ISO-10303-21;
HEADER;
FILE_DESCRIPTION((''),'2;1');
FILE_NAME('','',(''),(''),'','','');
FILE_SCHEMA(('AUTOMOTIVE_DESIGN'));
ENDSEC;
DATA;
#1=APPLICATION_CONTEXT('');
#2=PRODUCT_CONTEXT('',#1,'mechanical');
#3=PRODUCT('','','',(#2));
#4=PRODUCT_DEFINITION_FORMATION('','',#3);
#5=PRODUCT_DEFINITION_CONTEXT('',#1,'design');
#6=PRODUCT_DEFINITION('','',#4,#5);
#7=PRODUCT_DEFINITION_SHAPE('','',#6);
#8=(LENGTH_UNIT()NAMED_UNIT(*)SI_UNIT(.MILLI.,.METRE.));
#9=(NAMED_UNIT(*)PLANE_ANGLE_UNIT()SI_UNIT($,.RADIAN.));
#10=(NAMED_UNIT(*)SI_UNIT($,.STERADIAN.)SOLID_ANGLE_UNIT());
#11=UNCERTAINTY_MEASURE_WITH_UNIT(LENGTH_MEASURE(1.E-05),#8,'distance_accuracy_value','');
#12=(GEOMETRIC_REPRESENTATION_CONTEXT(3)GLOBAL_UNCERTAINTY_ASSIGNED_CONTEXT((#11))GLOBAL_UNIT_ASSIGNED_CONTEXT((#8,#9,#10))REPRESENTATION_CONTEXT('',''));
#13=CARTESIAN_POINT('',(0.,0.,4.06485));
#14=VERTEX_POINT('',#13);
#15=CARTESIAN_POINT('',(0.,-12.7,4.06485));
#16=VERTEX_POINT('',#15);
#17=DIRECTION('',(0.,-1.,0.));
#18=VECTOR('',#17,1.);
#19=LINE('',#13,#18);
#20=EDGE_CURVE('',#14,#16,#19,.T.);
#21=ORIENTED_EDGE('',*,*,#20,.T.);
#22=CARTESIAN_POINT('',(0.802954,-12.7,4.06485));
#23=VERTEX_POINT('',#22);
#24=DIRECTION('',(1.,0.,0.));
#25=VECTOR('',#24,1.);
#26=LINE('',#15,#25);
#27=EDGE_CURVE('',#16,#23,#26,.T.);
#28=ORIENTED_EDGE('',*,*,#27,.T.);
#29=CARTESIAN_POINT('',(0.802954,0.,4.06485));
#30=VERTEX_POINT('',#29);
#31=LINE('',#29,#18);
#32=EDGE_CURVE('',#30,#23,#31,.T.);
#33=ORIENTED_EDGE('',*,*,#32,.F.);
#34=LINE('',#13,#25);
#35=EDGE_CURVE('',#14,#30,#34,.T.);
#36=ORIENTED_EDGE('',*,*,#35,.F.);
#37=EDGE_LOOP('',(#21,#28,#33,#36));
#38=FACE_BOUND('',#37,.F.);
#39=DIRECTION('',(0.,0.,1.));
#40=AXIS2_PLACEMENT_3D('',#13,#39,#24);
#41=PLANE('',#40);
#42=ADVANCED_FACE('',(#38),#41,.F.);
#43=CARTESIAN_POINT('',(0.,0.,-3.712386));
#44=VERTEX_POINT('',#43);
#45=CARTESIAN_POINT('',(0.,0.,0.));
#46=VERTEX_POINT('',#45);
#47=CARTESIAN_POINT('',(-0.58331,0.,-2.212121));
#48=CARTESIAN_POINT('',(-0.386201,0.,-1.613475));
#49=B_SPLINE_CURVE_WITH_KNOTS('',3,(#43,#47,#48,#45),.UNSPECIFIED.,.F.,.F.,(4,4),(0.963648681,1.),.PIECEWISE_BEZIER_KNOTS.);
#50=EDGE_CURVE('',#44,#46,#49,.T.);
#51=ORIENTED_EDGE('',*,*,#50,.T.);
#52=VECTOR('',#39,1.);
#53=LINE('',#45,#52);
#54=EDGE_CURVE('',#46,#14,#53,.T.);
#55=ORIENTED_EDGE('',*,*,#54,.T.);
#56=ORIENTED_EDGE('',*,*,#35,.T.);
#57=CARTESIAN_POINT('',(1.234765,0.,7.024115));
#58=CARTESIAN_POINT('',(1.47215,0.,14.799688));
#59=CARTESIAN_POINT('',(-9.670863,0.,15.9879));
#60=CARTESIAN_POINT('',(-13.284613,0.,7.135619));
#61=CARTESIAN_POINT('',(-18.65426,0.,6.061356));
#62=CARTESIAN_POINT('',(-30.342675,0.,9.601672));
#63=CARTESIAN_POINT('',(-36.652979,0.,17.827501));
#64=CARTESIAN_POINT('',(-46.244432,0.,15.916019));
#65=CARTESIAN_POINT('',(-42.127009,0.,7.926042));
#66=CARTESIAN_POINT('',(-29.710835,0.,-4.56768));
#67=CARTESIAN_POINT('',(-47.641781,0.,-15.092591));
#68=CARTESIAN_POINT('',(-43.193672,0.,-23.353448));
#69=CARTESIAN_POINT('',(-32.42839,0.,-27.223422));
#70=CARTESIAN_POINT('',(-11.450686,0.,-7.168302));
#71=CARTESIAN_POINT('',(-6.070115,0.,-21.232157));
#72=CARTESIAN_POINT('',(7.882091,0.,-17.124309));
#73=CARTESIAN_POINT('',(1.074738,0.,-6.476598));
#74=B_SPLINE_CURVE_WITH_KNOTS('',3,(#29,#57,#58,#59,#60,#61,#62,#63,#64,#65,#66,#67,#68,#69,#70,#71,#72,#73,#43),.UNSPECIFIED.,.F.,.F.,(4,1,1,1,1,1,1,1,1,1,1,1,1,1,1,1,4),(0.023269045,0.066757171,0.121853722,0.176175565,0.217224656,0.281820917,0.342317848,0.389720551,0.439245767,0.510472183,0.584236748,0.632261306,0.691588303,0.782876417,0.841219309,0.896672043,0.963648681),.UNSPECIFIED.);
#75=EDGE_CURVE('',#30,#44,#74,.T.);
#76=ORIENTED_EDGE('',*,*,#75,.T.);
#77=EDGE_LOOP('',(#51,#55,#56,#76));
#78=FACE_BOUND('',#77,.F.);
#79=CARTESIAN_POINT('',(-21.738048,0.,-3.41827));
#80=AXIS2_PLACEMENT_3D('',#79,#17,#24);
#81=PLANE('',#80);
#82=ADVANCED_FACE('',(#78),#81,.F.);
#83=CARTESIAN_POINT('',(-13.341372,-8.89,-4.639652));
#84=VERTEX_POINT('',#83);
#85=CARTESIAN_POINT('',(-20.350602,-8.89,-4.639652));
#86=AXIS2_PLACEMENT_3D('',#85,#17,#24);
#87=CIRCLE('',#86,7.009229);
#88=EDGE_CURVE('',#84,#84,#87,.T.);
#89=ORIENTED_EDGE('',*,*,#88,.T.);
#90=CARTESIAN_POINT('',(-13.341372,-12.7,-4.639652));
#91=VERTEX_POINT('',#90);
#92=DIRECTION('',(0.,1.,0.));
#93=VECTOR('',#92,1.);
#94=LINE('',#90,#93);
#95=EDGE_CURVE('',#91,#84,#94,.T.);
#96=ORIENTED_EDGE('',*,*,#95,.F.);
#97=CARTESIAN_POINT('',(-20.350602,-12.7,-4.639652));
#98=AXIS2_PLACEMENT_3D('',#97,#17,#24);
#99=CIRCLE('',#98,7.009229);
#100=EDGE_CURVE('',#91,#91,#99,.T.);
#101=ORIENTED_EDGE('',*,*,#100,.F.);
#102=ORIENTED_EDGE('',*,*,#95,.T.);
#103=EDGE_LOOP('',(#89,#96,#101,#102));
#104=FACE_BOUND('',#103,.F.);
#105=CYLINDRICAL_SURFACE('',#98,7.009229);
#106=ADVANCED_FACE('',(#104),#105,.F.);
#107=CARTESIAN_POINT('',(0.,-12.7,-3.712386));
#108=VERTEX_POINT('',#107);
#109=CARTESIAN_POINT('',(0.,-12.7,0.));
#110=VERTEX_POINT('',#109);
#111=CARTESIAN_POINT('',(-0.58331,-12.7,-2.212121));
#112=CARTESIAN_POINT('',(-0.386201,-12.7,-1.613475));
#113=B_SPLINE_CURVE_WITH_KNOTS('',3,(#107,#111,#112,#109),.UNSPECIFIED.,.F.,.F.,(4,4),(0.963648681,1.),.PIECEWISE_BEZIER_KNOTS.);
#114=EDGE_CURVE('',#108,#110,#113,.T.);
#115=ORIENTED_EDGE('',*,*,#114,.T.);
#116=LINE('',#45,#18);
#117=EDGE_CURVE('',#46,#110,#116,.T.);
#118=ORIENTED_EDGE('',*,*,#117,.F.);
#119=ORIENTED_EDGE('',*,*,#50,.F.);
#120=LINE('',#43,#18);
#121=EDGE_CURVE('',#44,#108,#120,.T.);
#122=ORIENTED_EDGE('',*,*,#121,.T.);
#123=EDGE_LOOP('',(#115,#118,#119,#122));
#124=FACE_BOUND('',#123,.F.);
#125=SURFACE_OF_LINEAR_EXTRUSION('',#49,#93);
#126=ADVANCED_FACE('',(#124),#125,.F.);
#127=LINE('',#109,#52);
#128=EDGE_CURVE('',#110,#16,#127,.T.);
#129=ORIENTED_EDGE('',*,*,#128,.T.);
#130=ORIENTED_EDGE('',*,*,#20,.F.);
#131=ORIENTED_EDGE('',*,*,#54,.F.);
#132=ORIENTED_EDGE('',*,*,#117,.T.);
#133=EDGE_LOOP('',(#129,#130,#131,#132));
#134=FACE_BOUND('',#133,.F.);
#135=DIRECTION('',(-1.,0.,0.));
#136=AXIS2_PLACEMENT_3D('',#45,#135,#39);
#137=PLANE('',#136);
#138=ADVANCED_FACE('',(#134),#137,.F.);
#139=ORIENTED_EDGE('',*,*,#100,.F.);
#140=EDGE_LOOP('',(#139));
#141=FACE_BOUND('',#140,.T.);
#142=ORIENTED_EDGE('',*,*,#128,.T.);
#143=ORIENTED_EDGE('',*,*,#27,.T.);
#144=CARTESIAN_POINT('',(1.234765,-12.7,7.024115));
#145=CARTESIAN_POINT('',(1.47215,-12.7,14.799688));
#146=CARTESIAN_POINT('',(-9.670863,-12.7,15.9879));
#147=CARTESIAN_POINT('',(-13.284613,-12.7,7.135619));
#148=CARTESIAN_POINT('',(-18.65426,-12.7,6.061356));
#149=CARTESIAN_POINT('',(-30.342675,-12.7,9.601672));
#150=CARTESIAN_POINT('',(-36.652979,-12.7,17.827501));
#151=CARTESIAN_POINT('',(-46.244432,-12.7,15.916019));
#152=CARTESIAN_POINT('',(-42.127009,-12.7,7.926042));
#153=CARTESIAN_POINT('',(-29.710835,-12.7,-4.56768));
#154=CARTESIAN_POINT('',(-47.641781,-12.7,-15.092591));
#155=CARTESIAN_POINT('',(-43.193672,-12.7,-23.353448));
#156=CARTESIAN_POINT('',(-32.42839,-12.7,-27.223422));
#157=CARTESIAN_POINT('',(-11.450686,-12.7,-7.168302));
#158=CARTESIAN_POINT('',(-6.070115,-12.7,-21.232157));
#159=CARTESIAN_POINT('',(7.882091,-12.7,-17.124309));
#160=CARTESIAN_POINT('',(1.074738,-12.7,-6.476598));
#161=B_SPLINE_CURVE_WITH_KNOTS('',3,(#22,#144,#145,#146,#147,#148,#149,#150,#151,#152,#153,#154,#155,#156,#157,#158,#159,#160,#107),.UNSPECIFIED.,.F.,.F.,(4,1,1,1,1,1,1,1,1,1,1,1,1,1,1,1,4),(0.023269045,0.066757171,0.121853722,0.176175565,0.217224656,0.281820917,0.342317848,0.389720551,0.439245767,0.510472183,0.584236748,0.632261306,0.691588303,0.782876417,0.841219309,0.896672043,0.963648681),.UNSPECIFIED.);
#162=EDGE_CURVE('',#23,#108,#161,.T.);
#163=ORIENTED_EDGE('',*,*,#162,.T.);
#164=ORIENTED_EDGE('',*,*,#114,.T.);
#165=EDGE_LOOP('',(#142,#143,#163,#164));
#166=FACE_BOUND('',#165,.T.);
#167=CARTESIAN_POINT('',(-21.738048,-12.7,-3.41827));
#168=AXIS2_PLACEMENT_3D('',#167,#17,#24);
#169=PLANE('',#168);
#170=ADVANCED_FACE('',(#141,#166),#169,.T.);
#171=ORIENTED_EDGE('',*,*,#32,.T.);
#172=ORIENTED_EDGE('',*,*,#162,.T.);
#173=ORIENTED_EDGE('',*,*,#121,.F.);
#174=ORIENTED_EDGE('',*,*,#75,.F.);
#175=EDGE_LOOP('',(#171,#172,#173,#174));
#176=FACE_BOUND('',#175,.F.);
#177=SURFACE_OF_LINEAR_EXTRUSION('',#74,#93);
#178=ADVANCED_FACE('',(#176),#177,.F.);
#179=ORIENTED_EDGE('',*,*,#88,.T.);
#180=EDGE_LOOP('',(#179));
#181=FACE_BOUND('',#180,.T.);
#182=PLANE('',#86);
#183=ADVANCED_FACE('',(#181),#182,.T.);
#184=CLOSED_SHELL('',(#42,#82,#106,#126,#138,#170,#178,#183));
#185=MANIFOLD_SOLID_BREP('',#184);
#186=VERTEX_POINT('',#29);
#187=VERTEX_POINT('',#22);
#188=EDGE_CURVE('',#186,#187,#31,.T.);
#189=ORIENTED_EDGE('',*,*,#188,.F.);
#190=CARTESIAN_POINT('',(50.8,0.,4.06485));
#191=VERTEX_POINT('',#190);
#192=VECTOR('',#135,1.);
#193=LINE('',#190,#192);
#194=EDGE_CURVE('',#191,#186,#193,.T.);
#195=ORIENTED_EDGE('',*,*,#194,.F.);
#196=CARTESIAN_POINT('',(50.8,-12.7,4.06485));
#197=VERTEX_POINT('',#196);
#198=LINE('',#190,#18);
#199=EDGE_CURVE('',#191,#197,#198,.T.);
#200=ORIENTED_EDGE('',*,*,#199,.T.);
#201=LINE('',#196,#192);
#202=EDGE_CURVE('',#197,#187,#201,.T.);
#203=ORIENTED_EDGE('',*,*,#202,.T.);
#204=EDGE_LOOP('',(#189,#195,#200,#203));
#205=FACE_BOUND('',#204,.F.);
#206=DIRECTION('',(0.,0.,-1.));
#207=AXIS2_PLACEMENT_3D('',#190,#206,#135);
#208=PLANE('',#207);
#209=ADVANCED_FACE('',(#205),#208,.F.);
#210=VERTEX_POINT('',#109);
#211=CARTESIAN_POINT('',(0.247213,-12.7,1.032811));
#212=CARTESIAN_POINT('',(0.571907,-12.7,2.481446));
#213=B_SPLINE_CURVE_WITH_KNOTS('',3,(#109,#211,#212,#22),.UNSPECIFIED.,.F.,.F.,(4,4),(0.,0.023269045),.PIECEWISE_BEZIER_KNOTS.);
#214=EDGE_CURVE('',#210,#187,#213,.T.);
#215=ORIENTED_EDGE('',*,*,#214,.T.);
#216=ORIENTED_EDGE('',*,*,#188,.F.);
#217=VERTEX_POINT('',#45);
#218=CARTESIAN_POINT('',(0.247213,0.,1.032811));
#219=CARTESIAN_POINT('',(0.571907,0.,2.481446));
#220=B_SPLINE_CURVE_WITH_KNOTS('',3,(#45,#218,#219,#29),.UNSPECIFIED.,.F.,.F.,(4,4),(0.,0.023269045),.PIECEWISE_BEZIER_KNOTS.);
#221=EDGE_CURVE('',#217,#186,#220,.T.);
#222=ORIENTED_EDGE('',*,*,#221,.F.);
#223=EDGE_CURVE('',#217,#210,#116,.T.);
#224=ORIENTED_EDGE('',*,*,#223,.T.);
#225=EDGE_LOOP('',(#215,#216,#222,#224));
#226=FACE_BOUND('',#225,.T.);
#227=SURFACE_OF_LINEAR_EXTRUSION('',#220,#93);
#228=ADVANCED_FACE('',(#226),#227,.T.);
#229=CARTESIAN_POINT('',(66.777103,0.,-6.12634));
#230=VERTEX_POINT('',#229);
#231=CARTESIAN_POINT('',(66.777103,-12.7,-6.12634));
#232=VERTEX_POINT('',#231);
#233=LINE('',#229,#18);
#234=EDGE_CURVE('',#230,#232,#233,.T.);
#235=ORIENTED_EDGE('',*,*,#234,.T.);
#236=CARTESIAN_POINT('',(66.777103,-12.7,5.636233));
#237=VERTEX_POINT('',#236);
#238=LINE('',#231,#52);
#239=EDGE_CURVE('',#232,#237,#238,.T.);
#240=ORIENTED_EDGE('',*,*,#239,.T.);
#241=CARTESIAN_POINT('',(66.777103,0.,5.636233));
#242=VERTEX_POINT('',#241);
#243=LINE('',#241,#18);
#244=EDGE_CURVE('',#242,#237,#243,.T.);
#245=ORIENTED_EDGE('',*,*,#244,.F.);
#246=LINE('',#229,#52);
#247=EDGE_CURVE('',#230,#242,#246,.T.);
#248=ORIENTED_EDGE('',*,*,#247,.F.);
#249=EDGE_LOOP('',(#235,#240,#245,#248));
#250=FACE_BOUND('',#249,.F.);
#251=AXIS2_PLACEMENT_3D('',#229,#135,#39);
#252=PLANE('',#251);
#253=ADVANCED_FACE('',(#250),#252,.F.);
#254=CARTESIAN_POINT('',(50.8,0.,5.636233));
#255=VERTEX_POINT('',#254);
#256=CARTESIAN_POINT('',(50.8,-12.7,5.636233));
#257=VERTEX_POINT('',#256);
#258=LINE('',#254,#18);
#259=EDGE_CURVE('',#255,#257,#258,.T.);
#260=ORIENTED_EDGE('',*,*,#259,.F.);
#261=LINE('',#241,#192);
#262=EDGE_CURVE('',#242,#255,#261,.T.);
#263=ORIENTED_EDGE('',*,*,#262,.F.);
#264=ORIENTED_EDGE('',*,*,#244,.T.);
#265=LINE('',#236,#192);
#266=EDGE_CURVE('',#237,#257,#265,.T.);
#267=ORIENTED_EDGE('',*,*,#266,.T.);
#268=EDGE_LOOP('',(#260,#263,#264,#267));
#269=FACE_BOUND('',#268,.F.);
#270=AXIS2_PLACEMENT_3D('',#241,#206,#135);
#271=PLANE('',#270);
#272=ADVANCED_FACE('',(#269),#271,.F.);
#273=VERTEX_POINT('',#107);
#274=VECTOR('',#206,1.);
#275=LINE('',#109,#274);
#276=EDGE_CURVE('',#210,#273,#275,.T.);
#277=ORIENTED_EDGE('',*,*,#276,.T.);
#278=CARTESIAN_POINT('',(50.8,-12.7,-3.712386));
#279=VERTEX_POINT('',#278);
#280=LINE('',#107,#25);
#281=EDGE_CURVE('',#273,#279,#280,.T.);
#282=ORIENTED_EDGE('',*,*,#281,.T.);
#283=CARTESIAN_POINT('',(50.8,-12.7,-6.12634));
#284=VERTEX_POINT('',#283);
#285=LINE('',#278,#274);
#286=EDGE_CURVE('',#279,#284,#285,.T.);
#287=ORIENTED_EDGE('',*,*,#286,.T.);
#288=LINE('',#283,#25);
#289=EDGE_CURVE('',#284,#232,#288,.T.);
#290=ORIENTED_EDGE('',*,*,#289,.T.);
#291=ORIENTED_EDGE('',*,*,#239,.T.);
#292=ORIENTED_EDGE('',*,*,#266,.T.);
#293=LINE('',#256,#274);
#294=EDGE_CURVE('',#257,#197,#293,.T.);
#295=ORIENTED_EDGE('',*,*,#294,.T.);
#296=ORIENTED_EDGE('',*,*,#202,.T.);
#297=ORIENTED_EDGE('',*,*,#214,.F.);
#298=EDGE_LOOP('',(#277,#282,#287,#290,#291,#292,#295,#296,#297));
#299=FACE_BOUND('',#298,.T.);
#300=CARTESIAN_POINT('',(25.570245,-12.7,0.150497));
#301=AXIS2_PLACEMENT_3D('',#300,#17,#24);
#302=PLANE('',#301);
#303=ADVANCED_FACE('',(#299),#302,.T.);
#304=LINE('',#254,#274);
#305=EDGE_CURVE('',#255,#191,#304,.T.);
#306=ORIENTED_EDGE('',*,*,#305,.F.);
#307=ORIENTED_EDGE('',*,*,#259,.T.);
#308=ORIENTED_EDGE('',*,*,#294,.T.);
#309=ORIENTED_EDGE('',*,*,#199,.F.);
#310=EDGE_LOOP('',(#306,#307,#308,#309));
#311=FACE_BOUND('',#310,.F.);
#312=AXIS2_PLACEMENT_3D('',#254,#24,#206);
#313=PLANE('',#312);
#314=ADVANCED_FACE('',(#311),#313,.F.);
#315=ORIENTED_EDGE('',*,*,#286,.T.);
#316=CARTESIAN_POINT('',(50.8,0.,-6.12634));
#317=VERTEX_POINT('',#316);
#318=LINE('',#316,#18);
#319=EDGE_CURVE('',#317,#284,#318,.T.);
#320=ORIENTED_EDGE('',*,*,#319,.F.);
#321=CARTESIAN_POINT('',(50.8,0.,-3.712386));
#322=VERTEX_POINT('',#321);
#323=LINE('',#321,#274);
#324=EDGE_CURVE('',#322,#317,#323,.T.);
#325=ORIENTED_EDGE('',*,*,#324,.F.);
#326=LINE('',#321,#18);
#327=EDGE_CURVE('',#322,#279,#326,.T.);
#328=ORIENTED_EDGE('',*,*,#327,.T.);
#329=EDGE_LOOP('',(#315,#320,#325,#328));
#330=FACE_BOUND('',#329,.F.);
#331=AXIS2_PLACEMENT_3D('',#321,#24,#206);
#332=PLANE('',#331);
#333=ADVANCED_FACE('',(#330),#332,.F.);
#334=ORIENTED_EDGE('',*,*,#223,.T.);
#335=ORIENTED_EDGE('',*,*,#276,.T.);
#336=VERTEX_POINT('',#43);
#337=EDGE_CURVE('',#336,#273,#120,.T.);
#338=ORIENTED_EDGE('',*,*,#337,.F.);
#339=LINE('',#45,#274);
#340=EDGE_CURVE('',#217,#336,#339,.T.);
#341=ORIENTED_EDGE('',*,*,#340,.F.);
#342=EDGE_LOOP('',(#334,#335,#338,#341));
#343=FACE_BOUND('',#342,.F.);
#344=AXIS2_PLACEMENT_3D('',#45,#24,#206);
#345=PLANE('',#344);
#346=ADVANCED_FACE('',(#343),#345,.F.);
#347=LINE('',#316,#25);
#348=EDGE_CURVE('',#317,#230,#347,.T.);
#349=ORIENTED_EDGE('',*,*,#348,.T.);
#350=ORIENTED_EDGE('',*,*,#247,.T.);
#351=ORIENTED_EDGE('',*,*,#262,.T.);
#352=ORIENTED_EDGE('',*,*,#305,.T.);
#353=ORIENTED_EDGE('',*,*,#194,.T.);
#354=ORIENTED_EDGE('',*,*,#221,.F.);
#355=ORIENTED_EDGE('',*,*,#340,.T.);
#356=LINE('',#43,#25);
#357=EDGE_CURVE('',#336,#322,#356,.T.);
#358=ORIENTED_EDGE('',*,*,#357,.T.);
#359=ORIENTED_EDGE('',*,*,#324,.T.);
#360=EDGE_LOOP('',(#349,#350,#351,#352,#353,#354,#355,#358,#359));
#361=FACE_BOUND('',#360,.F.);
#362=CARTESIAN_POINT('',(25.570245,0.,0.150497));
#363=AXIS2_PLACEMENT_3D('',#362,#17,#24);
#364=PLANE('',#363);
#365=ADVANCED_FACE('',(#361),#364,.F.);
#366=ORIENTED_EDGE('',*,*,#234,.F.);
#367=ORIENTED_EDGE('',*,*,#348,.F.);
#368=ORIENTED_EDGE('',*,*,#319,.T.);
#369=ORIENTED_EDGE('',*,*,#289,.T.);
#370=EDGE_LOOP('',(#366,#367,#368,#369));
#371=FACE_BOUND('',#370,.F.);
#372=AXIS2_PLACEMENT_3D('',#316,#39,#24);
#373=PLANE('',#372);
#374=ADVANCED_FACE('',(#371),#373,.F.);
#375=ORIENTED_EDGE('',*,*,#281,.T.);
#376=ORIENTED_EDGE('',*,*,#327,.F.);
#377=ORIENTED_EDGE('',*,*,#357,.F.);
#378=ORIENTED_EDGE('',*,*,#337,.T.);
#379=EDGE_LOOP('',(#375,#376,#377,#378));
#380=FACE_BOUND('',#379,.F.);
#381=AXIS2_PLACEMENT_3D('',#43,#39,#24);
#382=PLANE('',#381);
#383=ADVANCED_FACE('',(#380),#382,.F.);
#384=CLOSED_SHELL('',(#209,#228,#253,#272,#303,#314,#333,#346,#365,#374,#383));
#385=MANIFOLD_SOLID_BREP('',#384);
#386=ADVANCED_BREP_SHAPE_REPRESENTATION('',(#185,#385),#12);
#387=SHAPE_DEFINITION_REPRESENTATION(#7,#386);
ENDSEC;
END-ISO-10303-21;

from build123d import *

# Parameters (mm, degrees)
F1_DEPTH = 12.7
F2_R     = 7.0092293816
F3_DEPTH = 3.81


with BuildPart() as f1:
    # F0 (on Front) → F1 (new body)
    with BuildSketch(Plane.XZ):
        with BuildLine():
            add(Edge.make_bspline(
                [(0.8029544839, 4.0648496944), (1.2347652941, 7.0241145987), (1.4721495297, 14.7996883678), (-9.6708628109, 15.9878996128), (-13.284612676, 7.1356193282), (-18.6542603724, 6.0613556173), (-30.3426752266, 9.6016721768), (-36.6529788005, 17.8275013443), (-46.2444318253, 15.9160192782), (-42.1270089818, 7.9260424689), (-29.7108350462, -4.5676802797), (-47.6417812778, -15.0925906587), (-43.1936717702, -23.3534478137), (-32.4283903553, -27.2234215927), (-11.4506857343, -7.1683016979), (-6.0701150443, -21.2321567841), (7.8820914243, -17.1243085579), (1.0747376663, -6.4765977067), (0, -3.7123864744)],
                knots=[0.023269045, 0.023269045, 0.023269045, 0.023269045, 0.0667571713, 0.1218537224, 0.1761755653, 0.2172246557, 0.2818209165, 0.3423178482, 0.3897205506, 0.4392457667, 0.5104721831, 0.5842367479, 0.6322613056, 0.6915883027, 0.7828764166, 0.8412193089, 0.8966720426, 0.9636486809, 0.9636486809, 0.9636486809, 0.9636486809], degree=3))
            add(Edge.make_bspline(
                [(0, -3.7123864744), (-0.5833098349, -2.2121212021), (-0.3862011269, -1.6134754239), (0, 0)],
                knots=[0.9636486809, 0.9636486809, 0.9636486809, 0.9636486809, 1, 1, 1, 1], degree=3))
            Line((0, 0), (0, 4.0648496944))
            Line((0, 4.0648496944), (0.8029544839, 4.0648496944))
        make_face()
    extrude(amount=F1_DEPTH)

    # F2 (on face) → F3 (cut)
    with BuildSketch(Plane.XZ.offset(12.7)):
        with Locations((-20.3506015241, -4.6396516263)):
            Circle(F2_R)
    extrude(amount=-F3_DEPTH, mode=Mode.SUBTRACT)


with BuildPart() as f1b:
    # F0 (on Front) → F1, piece 2 (new body)
    with BuildSketch(Plane.XZ):
        with BuildLine():
            Line((0, 0), (0, -3.7123864744))
            Line((0, -3.7123864744), (50.8, -3.7123864744))
            Line((50.8, -3.7123864744), (50.8, 4.0648496944))
            Line((50.8, 4.0648496944), (0.8029544839, 4.0648496944))
            add(Edge.make_bspline(
                [(0, 0), (0.2472133512, 1.0328107271), (0.5719069301, 2.4814458031), (0.8029544839, 4.0648496944)],
                knots=[0, 0, 0, 0, 0.023269045, 0.023269045, 0.023269045, 0.023269045], degree=3))
        make_face()
        Polygon((50.8, 4.0648496944), (50.8, -3.7123864744), (50.8, -6.126340013), (66.7771026492, -6.126340013), (66.7771026492, 5.6362333708), (50.8, 5.6362333708), align=None)
    extrude(amount=F1_DEPTH)


solid = Compound([f1.part, f1b.part])
